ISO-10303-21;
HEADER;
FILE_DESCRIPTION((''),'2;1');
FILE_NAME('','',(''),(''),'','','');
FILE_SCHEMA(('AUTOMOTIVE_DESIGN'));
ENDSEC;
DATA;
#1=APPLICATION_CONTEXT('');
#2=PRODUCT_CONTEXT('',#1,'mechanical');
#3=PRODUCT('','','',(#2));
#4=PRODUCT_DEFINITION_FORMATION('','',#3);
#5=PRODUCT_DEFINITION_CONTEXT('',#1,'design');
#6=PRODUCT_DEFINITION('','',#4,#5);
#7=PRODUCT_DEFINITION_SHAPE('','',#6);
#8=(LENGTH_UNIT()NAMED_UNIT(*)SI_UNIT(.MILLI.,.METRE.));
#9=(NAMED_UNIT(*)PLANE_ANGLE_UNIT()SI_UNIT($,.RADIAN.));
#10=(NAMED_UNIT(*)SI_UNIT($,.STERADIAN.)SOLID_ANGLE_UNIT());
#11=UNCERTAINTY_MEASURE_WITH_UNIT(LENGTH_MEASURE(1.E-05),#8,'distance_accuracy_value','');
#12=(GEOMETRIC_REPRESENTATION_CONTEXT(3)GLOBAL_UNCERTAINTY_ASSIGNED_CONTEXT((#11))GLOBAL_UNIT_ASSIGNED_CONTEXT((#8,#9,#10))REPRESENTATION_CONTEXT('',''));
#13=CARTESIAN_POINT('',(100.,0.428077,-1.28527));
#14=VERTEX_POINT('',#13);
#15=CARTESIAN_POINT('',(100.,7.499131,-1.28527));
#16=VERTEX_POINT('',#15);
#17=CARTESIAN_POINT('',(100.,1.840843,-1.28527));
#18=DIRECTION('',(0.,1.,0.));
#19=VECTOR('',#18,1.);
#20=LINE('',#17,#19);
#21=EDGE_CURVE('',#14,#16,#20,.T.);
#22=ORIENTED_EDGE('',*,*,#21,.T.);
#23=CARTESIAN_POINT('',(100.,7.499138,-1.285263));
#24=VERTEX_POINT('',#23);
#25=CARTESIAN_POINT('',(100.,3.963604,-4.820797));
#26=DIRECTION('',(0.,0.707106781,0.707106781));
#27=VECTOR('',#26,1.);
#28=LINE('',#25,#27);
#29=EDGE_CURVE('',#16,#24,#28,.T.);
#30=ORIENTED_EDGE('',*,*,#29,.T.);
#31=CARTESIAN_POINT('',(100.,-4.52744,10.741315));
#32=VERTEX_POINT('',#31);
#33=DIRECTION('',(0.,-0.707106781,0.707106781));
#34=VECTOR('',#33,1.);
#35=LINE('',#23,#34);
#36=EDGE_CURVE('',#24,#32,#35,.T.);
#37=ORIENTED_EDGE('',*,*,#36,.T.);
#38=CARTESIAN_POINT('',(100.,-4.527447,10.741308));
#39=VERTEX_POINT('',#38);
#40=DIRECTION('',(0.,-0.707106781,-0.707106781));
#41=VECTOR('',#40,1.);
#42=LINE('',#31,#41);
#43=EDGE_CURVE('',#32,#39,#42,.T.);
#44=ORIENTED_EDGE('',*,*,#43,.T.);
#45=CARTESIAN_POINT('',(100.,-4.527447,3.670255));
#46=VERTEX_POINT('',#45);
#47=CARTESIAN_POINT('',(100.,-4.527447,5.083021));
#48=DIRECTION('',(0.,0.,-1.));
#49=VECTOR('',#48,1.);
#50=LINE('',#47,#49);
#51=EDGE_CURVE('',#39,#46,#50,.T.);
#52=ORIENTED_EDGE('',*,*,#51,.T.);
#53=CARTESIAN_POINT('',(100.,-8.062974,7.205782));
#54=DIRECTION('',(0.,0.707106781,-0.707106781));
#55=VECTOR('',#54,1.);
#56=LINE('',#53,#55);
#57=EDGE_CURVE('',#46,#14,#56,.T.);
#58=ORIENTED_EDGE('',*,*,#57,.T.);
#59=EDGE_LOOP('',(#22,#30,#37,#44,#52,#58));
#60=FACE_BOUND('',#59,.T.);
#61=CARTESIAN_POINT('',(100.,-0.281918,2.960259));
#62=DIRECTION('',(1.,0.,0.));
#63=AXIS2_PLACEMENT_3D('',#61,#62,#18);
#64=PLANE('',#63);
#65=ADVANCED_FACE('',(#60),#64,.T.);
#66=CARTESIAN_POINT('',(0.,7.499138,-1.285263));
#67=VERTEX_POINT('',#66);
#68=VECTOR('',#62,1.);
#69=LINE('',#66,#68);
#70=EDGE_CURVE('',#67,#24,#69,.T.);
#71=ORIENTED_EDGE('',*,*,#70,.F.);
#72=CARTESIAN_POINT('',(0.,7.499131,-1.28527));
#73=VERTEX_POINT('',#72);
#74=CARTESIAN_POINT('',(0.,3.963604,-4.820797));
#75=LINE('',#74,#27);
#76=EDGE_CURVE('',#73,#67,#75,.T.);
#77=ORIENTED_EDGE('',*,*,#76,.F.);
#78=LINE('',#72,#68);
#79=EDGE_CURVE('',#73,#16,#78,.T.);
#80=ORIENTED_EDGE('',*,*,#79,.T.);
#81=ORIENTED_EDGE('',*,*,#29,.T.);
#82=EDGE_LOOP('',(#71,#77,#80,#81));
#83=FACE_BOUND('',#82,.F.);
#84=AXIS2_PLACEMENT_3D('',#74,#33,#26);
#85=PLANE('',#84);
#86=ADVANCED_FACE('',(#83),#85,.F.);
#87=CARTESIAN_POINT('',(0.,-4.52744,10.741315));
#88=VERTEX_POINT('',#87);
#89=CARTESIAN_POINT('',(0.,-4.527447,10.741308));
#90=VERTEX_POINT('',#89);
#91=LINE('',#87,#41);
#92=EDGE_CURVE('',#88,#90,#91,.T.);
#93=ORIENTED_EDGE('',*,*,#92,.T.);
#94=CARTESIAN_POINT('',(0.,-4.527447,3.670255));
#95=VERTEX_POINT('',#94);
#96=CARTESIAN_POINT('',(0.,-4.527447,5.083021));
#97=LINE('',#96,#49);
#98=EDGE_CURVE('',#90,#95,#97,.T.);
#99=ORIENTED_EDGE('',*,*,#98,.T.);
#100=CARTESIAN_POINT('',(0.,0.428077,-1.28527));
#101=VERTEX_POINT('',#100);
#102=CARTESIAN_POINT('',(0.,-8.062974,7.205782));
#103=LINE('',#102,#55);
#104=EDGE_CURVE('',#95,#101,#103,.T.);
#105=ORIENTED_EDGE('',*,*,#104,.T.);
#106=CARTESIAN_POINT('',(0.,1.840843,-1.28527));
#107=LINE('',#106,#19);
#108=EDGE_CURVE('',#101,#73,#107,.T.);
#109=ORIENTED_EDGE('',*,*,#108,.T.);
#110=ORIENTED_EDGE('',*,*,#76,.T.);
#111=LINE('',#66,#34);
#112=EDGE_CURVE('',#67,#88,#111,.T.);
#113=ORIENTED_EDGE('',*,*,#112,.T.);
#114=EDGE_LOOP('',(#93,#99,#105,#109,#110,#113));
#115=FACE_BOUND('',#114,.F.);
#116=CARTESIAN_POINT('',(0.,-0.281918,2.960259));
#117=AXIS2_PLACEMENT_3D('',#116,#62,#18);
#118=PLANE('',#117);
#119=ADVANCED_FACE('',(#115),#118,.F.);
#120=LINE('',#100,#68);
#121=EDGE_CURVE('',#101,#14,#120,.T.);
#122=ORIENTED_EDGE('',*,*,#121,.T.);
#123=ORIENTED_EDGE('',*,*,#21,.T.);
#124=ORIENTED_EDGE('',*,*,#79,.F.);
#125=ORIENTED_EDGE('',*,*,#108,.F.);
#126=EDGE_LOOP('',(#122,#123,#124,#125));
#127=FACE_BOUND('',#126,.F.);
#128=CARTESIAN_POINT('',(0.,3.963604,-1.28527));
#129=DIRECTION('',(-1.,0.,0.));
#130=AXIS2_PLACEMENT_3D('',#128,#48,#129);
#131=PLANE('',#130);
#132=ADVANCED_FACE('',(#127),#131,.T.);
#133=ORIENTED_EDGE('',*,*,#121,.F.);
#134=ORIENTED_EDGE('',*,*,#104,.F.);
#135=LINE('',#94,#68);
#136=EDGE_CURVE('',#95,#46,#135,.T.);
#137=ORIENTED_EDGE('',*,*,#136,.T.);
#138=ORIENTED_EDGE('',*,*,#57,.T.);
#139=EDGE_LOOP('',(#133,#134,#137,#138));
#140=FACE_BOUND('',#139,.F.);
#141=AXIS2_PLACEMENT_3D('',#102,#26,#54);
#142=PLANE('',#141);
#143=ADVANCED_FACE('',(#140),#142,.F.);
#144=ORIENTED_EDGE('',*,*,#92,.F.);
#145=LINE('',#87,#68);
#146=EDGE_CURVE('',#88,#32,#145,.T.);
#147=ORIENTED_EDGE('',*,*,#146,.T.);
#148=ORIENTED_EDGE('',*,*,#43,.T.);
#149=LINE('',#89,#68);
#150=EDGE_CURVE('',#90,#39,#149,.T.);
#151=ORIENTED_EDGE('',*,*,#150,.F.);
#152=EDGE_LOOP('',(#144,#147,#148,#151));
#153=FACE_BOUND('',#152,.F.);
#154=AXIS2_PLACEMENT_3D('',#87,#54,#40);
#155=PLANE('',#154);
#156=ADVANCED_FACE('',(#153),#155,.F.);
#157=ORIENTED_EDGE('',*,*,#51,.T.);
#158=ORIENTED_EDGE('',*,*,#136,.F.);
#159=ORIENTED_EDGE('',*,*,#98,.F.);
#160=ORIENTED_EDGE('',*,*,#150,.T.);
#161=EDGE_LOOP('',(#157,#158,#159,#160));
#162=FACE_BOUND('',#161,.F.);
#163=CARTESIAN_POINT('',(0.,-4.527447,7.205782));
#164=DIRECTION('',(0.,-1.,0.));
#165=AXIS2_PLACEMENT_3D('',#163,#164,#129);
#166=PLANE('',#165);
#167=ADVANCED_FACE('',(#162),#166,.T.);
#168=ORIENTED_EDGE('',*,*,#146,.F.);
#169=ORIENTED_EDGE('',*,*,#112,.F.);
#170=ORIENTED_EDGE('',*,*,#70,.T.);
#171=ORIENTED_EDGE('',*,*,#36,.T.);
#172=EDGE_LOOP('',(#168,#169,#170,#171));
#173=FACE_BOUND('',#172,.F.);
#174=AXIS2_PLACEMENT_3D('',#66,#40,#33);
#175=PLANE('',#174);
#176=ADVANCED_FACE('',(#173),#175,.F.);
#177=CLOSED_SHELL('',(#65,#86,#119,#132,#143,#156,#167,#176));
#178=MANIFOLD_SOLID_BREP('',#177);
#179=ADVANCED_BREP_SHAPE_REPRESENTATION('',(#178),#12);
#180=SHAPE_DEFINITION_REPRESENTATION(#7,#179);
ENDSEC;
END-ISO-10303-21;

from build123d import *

# Parameters (mm, degrees)
F1_DEPTH = 100
F2_SIZE  = 4.99999


# Not quite as in the source:
# - a fillet or chamfer is up to 0.001 mm smaller than in the source, because OpenCascade refuses the exact size


with BuildPart() as f1:
    # F0 (on Right) → F1 (new body)
    with BuildSketch(Plane.YZ):
        Polygon((7.4991378996, -1.2852627068), (-4.5274403009, 10.7413154936), (-8.0629742068, 7.2057815877), (3.9636039936, -4.8207966127), align=None)
    extrude(amount=F1_DEPTH)

    # F2 (size 5 in the source; OpenCascade refuses exactly that, so slightly less here)
    f2_edges = [f1.edges().sort_by_distance(p)[0] for p in [
        (50, -8.062974, 7.205782),
        (50, 3.963604, -4.820797),
    ]]
    chamfer(f2_edges, length=F2_SIZE)


solid = f1.part
